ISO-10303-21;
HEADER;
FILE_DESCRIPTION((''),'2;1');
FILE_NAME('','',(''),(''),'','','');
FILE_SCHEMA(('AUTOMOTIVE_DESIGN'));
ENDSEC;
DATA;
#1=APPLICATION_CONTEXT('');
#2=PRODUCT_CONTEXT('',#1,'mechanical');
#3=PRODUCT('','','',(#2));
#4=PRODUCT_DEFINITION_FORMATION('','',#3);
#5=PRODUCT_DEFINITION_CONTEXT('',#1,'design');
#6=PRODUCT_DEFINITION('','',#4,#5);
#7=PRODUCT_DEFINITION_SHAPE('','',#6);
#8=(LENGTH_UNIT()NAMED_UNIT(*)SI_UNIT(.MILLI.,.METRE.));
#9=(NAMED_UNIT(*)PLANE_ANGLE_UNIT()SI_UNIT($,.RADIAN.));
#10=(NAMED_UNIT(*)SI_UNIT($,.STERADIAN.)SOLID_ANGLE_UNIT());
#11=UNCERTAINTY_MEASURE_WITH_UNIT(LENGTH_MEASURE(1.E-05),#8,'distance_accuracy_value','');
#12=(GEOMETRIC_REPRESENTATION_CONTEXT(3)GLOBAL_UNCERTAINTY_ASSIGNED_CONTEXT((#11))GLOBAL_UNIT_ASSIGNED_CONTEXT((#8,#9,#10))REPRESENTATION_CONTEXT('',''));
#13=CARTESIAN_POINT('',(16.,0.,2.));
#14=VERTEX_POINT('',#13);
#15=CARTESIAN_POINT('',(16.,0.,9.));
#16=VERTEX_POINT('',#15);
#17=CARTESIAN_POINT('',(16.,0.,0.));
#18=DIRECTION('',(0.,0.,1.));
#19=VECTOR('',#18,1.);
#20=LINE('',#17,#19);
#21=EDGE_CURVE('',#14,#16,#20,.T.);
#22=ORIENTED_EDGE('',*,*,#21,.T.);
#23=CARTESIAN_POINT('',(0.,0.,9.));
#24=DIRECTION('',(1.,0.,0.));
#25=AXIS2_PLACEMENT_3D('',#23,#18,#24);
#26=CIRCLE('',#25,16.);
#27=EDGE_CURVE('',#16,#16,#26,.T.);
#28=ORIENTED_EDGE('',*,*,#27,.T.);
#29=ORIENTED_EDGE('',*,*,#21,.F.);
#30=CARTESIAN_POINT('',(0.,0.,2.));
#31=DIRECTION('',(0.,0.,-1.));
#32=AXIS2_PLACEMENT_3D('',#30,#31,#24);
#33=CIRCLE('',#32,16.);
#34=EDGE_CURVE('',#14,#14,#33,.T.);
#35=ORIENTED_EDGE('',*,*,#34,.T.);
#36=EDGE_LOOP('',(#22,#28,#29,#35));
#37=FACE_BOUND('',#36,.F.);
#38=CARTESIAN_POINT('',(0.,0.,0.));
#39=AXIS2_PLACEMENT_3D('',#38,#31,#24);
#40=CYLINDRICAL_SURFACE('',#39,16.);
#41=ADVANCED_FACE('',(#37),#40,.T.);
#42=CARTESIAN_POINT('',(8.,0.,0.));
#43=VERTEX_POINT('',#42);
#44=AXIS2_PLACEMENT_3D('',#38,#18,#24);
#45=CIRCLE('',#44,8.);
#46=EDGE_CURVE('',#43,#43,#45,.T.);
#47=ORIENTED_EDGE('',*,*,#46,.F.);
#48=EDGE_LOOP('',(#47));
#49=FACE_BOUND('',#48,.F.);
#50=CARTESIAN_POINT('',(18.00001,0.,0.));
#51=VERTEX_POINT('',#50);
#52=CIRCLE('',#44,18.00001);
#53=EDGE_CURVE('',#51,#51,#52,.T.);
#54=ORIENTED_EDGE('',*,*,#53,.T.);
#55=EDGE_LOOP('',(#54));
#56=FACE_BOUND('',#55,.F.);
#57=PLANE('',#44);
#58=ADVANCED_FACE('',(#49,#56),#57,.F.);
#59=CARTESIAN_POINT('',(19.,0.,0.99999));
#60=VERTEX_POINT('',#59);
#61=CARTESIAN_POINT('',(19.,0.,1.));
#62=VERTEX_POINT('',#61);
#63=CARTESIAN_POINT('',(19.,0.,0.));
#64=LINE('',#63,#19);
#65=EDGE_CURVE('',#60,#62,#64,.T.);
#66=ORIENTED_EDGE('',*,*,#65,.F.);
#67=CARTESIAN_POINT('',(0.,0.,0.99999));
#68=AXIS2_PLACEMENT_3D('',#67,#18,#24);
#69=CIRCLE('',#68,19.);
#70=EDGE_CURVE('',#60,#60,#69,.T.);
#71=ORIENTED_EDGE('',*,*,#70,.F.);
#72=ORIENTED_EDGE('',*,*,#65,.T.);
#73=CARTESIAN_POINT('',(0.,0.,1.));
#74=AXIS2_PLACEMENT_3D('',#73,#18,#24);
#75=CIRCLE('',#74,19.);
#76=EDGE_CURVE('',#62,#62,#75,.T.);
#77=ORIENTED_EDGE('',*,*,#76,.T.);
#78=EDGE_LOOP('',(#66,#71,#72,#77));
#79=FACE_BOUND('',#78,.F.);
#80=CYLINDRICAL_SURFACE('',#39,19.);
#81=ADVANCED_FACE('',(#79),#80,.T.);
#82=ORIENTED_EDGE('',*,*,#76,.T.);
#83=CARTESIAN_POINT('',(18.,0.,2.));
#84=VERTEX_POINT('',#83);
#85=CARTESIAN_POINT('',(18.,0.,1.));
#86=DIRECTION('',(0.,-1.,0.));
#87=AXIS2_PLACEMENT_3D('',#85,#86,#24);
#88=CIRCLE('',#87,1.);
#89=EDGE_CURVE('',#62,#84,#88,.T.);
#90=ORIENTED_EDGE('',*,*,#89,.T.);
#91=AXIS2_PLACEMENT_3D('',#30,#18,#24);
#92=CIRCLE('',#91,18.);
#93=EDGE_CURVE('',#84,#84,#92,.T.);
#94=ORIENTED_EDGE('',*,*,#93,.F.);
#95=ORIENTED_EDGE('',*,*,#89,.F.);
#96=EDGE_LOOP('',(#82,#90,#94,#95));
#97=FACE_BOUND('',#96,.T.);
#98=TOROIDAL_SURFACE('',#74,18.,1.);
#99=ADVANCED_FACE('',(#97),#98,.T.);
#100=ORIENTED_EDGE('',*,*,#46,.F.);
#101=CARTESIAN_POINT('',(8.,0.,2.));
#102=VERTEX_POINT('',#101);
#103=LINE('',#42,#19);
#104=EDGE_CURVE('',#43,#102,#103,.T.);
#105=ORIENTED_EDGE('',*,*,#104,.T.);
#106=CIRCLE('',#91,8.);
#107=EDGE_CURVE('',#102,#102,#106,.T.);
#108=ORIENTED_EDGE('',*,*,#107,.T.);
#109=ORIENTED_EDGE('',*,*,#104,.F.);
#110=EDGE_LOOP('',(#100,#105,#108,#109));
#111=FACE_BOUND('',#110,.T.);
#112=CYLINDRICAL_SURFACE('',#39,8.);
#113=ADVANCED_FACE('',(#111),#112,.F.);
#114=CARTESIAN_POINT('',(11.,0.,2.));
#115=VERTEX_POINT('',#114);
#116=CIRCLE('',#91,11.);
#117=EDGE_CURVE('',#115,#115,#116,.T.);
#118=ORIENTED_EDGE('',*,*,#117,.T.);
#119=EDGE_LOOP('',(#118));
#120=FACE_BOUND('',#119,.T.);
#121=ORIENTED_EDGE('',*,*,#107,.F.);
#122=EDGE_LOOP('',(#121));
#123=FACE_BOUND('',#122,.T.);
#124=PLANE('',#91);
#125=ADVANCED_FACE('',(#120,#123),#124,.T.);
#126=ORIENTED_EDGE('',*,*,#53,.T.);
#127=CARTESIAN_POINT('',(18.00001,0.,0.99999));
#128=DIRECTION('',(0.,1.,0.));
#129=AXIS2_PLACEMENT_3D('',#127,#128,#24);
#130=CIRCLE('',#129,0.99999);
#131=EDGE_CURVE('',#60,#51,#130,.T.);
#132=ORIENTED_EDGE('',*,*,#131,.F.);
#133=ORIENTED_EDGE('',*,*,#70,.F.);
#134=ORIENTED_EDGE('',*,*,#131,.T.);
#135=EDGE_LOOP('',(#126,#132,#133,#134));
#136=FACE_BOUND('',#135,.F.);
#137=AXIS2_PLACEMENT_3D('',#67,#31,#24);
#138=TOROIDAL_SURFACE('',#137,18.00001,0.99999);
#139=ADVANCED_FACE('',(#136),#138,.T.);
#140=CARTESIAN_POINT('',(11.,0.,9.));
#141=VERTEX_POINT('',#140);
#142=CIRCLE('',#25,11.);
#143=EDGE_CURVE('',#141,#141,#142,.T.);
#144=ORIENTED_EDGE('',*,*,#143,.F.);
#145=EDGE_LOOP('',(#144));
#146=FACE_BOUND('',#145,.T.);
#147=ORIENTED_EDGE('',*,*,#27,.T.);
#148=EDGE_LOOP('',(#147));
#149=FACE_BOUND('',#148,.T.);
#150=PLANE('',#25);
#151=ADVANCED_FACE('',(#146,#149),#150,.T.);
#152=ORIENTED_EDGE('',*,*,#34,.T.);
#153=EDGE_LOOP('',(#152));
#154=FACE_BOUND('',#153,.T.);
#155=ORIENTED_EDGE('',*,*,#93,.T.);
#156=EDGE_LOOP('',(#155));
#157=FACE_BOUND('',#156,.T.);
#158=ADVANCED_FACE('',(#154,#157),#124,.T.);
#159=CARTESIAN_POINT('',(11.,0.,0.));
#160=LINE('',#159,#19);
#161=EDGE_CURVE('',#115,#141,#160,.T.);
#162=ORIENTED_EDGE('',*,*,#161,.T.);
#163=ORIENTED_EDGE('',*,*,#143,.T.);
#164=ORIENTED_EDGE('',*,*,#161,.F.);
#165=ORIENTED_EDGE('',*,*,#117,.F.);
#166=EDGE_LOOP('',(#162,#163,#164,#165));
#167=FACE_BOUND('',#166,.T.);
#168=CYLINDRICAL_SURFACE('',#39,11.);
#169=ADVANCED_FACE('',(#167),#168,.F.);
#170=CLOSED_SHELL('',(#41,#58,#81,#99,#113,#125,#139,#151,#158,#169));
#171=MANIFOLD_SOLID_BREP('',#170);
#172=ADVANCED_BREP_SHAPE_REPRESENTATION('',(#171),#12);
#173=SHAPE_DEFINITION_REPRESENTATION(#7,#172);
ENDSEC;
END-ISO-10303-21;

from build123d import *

# Parameters (mm, degrees)
F0_R     = 19
F0_R_2   = 16
F0_R_3   = 11
F1_DEPTH = 2
F2_DEPTH = 9
F3_R     = 1
F4_R     = 0.99999
F0_R_4   = 8
F5_DEPTH = 2


# Not quite as in the source:
# - a fillet or chamfer is up to 0.001 mm smaller than in the source, because OpenCascade refuses the exact size


with BuildPart() as f1:
    # F0 (on Top) → F1 (new body)
    with BuildSketch(Plane.XY):
        Circle(F0_R)
        Circle(F0_R_2, mode=Mode.SUBTRACT)
        Circle(F0_R_2)
        Circle(F0_R_3, mode=Mode.SUBTRACT)
    extrude(amount=F1_DEPTH)

    # F0 (on Top) → F2 (join)
    with BuildSketch(Plane.XY):
        Circle(F0_R_2)
        Circle(F0_R_3, mode=Mode.SUBTRACT)
    extrude(amount=F2_DEPTH)

    # F3
    f3_edges = [f1.edges().sort_by_distance(p)[0] for p in [
        (-19, 0, 2),
    ]]
    fillet(f3_edges, radius=F3_R)

    # F4 (radius 1 in the source; OpenCascade refuses exactly that, so slightly less here)
    f4_edges = [f1.edges().sort_by_distance(p)[0] for p in [
        (-19, 0, 0),
    ]]
    fillet(f4_edges, radius=F4_R)

    # F0 (on Top) → F5 (join)
    with BuildSketch(Plane.XY):
        Circle(F0_R_3)
        Circle(F0_R_4, mode=Mode.SUBTRACT)
    extrude(amount=F5_DEPTH)


solid = f1.part
